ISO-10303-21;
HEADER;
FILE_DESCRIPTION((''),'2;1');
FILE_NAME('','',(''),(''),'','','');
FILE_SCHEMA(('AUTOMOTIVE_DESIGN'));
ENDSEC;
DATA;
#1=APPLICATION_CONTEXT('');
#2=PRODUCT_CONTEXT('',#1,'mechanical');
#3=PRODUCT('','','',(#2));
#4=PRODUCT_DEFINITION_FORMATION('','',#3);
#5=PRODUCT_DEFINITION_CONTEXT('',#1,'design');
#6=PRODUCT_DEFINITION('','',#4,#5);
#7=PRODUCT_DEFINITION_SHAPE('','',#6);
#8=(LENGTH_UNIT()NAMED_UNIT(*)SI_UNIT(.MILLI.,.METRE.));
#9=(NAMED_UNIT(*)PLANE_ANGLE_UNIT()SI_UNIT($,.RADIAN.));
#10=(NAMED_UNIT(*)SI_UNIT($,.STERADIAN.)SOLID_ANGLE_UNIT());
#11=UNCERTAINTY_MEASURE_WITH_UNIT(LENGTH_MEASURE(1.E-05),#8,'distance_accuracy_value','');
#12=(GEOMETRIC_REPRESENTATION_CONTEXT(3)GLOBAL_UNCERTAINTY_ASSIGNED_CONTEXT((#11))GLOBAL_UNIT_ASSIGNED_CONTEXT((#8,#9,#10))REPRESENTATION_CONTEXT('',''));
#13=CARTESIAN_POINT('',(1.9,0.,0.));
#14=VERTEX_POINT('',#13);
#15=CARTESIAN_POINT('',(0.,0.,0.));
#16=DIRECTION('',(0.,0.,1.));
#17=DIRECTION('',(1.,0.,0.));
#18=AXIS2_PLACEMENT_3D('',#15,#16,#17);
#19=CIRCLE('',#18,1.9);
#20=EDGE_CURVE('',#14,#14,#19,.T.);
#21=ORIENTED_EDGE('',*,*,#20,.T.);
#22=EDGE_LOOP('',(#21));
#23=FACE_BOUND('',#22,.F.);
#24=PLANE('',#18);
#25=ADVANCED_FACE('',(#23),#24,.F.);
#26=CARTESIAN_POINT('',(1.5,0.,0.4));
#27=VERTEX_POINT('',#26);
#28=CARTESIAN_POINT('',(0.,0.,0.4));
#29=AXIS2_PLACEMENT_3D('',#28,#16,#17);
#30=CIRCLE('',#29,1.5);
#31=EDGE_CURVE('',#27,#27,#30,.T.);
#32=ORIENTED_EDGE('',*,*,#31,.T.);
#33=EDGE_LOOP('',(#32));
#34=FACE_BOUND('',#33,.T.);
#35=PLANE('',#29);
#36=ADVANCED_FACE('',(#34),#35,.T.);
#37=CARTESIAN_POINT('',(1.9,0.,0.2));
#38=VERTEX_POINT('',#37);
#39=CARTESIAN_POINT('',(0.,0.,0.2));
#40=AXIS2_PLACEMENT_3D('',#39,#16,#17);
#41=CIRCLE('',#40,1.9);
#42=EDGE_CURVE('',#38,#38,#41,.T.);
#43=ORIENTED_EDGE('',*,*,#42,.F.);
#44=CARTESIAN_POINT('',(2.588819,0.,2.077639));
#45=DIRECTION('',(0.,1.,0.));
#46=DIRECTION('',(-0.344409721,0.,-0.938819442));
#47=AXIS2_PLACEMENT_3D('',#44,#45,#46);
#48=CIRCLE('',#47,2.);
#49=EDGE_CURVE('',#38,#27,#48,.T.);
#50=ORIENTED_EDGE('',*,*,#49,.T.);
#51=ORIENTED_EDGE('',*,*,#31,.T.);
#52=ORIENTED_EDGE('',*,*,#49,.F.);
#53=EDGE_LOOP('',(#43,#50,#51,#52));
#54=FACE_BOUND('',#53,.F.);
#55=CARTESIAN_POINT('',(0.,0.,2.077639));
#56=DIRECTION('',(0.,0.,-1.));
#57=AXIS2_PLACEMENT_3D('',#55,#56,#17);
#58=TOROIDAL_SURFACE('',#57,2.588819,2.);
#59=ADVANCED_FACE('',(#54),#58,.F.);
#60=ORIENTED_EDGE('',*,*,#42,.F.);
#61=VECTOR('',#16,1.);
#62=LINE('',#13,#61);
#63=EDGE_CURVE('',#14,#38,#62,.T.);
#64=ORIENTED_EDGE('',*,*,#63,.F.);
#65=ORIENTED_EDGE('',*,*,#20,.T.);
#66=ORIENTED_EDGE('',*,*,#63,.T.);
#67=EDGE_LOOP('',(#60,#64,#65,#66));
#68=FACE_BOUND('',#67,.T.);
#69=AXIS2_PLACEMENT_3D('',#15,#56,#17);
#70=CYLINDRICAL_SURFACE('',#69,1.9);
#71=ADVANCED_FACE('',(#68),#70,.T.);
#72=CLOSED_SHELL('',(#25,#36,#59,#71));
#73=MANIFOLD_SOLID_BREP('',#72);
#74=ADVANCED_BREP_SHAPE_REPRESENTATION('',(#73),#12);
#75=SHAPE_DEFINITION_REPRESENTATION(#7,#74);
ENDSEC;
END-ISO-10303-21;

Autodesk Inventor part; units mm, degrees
ref_plane "YZ Plane" through (0, 0, 0) normal (1, 0, 0) x (0, 1, 0)
ref_plane "XZ Plane" through (0, 0, 0) normal (0, 1, 0) x (-1, 0, 0)
ref_plane "XY Plane" through (0, 0, 0) normal (0, 0, 1) x (1, 0, 0)
sketch "Sketch1" plane through (0, 0, 0) normal (0, 0, 1) x (1, 0, 0)
  circle A0 centre (0, 0) radius 1.9
  dimension "d0" = 3.8
extrude "Extrusion1" add sketch "Sketch1" along normal blind 0.2
sketch "Sketch2" plane through (0, 0, 0.2) normal (0, 0, 1) x (1, 0, 0)
  circle A0 centre (0, 0) radius 1.5
  dimension "d3" = 3
extrude "Extrusion2" add sketch "Sketch2" along normal blind 0.2
fillet "Fillet1" radius 2 1 edges at (-1.5, 0, 0.2)
properties part number "frisbeeeeeeee" material "Aluminum, Anodized Red"
